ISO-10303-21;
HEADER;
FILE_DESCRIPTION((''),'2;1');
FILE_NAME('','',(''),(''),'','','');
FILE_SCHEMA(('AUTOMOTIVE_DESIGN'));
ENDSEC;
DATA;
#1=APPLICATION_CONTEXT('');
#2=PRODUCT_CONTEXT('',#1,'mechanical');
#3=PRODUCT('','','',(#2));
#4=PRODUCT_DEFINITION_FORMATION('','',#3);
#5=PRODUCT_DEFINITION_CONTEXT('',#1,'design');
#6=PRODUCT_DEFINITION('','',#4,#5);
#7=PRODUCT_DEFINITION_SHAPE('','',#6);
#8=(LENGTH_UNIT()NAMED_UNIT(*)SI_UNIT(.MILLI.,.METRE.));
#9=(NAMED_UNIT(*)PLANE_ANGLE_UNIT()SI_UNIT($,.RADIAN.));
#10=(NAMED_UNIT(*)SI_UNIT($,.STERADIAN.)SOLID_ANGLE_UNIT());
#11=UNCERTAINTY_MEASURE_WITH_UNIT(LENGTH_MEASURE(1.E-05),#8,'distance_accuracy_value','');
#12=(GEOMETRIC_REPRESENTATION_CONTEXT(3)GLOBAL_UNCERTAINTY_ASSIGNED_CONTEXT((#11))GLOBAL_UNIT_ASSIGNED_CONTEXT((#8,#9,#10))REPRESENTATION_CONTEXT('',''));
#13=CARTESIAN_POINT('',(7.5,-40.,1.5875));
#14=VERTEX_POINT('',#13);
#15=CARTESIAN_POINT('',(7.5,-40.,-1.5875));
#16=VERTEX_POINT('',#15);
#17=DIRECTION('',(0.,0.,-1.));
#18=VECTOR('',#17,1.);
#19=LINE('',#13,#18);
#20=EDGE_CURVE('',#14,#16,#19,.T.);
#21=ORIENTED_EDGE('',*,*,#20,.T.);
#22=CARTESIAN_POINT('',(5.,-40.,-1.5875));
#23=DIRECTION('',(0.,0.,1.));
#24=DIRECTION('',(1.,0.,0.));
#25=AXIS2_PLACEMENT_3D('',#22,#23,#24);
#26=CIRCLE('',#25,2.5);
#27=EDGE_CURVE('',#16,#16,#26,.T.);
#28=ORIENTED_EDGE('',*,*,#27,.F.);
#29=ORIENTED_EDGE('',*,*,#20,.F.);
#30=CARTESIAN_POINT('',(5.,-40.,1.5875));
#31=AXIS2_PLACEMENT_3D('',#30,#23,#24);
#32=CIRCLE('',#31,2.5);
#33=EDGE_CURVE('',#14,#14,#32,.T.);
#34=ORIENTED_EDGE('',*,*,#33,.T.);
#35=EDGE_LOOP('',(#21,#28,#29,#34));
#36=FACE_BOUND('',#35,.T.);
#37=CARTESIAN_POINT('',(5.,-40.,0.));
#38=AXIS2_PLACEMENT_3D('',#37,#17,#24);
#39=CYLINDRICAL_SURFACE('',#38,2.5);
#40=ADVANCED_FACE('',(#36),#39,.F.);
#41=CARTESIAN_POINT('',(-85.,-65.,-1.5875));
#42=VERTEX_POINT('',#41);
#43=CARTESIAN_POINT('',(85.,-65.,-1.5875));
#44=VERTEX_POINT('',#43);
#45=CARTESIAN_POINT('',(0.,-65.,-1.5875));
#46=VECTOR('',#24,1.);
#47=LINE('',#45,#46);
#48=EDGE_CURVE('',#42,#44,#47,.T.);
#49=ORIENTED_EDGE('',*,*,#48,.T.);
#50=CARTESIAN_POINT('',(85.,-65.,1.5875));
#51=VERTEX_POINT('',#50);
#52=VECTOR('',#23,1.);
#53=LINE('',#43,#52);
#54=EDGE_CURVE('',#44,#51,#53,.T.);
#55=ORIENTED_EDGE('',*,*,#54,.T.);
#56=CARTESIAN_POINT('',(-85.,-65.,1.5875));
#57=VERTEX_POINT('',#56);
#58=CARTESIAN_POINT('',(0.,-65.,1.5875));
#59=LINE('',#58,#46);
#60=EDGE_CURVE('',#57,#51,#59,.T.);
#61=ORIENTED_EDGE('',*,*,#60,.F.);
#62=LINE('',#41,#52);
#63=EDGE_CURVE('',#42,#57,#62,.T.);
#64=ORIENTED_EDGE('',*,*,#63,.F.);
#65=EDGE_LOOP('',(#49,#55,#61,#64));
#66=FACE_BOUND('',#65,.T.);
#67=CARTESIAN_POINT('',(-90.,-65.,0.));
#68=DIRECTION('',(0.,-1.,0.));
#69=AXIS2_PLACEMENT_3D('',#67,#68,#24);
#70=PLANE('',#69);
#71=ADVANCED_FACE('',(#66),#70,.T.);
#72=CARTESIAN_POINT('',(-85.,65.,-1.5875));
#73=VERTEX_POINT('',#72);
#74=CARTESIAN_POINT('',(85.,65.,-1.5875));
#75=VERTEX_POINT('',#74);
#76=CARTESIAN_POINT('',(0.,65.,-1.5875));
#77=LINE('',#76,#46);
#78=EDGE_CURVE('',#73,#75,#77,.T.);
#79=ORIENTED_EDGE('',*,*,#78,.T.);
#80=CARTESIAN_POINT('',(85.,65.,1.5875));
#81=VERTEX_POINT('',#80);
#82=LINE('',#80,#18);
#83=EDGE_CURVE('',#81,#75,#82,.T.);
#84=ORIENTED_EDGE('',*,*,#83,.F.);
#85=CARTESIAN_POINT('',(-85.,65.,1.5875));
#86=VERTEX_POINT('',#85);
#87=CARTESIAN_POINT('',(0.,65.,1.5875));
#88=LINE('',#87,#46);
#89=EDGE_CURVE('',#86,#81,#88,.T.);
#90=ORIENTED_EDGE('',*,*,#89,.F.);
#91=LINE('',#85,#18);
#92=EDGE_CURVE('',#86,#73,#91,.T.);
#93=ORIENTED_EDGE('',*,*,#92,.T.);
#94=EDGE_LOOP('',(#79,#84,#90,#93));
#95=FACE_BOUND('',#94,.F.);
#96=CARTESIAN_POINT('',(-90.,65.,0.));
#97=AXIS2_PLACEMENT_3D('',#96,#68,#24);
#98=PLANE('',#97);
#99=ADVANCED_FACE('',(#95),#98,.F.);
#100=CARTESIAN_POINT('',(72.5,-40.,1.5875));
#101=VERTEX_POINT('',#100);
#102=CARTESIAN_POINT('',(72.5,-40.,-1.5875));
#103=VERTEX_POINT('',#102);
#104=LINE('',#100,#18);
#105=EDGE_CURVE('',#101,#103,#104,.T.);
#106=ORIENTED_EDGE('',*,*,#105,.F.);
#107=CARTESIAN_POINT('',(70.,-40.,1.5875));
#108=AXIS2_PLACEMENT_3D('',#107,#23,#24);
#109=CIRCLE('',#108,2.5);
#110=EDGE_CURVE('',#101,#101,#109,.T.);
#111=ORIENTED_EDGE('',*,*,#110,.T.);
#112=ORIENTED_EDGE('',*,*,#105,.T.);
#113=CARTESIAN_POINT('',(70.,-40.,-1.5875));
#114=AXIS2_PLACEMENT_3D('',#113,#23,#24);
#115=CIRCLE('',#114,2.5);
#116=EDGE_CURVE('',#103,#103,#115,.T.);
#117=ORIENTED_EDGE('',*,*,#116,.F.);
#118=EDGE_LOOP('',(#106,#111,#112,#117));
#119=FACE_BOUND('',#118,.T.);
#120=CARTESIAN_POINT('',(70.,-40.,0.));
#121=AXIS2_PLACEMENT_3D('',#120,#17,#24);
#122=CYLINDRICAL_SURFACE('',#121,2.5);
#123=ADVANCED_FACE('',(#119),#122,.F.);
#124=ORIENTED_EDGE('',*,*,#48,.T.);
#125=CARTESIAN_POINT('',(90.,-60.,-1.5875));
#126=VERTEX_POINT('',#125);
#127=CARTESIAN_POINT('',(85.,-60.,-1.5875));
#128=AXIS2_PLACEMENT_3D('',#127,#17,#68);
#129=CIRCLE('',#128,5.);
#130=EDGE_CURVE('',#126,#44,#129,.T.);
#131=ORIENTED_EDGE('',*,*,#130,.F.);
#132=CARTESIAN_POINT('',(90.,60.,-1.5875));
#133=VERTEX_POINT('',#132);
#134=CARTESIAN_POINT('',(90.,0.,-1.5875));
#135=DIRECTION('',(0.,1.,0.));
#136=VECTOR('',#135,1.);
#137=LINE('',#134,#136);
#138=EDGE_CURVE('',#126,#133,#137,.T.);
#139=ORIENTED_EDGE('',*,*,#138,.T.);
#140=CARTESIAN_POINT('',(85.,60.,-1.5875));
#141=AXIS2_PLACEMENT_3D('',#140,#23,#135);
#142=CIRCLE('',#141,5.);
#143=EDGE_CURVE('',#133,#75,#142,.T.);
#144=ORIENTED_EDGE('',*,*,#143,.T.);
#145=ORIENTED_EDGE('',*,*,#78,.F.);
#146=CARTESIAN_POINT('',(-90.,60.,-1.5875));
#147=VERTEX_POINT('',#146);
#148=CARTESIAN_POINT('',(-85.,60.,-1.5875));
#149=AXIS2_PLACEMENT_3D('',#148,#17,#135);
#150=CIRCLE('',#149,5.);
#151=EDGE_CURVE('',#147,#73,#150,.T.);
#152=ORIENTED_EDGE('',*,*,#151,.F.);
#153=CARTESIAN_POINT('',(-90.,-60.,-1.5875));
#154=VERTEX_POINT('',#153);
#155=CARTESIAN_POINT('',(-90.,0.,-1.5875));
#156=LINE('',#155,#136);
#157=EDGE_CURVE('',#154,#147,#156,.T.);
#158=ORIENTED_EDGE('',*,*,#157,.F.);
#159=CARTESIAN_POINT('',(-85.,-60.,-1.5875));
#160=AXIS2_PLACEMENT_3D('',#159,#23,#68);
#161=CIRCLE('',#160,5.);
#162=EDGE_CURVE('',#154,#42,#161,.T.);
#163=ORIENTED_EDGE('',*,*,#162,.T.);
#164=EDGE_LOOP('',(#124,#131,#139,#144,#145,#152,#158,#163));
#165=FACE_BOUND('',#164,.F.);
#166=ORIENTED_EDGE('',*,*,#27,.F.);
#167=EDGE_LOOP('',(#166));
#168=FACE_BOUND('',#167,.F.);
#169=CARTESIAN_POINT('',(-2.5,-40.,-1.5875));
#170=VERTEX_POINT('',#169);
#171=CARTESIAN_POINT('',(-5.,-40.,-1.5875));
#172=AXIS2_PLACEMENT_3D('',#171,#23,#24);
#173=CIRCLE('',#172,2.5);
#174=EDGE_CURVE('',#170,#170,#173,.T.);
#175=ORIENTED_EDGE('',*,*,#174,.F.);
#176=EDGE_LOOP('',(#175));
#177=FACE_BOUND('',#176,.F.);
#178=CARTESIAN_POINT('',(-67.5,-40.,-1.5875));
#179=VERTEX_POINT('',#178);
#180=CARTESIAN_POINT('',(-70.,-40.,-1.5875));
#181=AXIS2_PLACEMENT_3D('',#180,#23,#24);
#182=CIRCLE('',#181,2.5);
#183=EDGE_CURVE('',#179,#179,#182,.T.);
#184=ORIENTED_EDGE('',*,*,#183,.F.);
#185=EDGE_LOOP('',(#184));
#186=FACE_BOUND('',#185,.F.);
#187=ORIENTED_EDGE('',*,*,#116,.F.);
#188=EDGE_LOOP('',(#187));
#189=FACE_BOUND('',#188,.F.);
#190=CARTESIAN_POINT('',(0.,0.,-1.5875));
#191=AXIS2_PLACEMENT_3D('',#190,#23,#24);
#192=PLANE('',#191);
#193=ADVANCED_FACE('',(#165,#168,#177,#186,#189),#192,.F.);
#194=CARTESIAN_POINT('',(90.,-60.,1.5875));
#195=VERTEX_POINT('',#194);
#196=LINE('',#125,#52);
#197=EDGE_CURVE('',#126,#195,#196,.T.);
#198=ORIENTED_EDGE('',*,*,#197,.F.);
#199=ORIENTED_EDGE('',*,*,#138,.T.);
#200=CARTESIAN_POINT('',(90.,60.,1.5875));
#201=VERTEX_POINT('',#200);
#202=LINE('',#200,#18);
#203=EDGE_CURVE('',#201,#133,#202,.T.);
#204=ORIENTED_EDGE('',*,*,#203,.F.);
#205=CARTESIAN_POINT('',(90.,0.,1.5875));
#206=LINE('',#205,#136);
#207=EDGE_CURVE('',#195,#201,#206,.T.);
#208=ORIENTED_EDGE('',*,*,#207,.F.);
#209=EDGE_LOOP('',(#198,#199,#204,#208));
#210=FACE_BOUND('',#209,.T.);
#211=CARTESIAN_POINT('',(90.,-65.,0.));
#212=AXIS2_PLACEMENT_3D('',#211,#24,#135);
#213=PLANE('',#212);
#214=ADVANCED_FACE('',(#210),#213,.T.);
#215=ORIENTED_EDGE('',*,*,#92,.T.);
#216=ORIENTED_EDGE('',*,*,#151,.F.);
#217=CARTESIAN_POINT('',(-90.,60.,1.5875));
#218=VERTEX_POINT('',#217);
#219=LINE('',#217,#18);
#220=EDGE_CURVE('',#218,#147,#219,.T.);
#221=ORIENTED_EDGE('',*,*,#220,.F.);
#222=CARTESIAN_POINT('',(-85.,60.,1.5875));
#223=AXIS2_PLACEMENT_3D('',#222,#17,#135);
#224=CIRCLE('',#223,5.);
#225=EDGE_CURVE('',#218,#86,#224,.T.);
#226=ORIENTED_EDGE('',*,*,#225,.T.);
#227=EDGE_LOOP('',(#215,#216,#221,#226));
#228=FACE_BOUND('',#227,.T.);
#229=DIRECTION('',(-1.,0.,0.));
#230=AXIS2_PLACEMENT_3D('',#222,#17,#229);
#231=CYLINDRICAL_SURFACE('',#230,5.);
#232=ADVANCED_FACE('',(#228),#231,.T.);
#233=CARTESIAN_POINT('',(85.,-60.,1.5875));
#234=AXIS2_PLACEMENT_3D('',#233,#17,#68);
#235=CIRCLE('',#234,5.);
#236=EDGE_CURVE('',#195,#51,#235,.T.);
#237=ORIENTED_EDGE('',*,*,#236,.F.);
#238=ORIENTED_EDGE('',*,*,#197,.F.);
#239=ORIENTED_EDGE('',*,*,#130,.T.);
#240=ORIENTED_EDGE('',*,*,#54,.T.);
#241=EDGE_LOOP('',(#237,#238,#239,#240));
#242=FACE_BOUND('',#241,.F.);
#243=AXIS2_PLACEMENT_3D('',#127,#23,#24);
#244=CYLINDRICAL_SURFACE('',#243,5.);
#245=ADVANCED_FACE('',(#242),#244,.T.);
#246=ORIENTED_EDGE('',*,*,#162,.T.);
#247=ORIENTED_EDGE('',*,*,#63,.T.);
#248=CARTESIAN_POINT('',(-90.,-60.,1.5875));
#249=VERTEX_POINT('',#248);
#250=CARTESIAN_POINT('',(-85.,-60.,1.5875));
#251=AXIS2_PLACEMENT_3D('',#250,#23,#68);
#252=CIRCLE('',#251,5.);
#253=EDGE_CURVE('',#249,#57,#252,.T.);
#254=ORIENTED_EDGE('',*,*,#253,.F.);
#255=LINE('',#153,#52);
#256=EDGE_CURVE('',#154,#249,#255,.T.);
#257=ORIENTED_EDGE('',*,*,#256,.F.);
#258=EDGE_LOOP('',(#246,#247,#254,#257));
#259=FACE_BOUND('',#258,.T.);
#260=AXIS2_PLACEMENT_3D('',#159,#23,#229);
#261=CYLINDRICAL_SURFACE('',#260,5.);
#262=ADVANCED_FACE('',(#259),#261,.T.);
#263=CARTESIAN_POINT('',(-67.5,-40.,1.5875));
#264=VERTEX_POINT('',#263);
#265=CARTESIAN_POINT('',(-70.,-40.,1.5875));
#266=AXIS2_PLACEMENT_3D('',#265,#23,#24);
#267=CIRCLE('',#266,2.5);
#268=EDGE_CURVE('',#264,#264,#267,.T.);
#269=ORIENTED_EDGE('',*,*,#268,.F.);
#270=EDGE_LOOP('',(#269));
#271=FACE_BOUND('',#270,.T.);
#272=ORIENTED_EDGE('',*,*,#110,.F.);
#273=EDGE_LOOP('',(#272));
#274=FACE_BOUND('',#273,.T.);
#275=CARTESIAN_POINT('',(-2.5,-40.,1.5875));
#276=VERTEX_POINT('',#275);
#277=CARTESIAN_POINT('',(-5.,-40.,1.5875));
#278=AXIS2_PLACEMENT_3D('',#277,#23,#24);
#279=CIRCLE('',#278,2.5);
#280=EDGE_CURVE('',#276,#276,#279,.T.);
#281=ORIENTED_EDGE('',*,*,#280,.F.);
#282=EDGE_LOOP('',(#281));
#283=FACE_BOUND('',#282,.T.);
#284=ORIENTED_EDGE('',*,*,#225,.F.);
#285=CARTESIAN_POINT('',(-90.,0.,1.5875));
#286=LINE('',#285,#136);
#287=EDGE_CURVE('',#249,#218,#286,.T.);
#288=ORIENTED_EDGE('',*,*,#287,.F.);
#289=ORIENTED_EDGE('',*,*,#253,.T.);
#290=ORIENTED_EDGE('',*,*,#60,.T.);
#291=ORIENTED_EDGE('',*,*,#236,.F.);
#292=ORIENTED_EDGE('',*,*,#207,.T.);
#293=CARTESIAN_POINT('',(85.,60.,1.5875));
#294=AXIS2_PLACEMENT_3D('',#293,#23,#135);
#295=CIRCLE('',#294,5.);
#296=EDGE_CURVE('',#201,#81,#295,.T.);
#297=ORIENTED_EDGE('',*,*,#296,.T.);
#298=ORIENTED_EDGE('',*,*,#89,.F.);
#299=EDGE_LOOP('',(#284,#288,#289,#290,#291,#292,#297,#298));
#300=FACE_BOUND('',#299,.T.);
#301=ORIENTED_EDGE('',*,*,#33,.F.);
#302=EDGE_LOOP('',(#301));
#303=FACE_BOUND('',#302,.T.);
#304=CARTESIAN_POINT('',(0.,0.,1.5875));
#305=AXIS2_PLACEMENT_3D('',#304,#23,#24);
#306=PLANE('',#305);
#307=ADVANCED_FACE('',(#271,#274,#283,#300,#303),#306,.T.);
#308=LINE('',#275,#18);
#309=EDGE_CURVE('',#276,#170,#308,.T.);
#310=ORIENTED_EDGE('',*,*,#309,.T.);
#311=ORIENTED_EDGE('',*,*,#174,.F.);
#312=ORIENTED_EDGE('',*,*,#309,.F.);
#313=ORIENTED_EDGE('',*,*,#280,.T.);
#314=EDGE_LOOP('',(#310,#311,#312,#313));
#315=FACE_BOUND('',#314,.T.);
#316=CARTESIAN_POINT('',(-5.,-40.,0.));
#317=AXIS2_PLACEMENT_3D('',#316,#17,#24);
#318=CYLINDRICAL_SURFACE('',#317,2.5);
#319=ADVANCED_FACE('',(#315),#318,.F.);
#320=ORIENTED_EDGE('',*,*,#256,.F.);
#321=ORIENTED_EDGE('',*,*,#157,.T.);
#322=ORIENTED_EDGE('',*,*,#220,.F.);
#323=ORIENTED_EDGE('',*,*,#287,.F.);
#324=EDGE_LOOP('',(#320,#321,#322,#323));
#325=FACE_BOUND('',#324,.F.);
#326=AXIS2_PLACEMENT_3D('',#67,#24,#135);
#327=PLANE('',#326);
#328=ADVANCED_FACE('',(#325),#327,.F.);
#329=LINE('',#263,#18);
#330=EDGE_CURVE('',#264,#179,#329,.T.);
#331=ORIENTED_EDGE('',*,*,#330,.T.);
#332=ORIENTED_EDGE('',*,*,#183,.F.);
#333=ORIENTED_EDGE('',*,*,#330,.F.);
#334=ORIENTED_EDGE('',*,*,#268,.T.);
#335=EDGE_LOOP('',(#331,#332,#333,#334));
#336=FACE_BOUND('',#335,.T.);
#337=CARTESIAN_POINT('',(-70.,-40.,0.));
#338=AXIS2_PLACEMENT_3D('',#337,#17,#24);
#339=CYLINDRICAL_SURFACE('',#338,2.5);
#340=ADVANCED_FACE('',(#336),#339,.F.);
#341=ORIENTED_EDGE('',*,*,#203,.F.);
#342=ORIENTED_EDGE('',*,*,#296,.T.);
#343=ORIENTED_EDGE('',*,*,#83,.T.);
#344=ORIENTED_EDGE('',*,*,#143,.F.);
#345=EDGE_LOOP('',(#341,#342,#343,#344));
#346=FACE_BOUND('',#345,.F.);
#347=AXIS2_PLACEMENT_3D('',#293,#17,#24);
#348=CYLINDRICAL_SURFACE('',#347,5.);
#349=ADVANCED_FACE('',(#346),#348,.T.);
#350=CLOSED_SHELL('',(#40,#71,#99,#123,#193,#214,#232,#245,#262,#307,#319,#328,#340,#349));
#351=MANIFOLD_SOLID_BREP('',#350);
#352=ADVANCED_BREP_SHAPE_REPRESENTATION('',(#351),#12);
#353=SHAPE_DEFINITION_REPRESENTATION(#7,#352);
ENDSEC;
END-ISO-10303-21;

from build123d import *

# Parameters (mm, degrees)
F0_W     = 180
F0_H     = 130
F0_R     = 2.5
F1_DEPTH = 1.5875
F2_R     = 5


# Not quite as in the source:
# - a length typed as a fraction of an inch, garbled in the dataset ("3 / 203.2 mm" for 3/8 in), is restored


with BuildPart() as f1:
    # F0 (on Top) → F1 (new body, symmetric)
    with BuildSketch(Plane.XY):
        Rectangle(F0_W, F0_H)
        with Locations((-70, -40)):
            Circle(F0_R, mode=Mode.SUBTRACT)
        with Locations((-5, -40)):
            Circle(F0_R, mode=Mode.SUBTRACT)
        with Locations((5, -40)):
            Circle(F0_R, mode=Mode.SUBTRACT)
        with Locations((70, -40)):
            Circle(F0_R, mode=Mode.SUBTRACT)
    extrude(amount=F1_DEPTH, both=True)

    # F2
    f2_edges = [f1.edges().sort_by_distance(p)[0] for p in [
        (-90, 65, 0),
        (-90, -65, 0),
        (90, -65, 0),
        (90, 65, 0),
    ]]
    fillet(f2_edges, radius=F2_R)


solid = f1.part
